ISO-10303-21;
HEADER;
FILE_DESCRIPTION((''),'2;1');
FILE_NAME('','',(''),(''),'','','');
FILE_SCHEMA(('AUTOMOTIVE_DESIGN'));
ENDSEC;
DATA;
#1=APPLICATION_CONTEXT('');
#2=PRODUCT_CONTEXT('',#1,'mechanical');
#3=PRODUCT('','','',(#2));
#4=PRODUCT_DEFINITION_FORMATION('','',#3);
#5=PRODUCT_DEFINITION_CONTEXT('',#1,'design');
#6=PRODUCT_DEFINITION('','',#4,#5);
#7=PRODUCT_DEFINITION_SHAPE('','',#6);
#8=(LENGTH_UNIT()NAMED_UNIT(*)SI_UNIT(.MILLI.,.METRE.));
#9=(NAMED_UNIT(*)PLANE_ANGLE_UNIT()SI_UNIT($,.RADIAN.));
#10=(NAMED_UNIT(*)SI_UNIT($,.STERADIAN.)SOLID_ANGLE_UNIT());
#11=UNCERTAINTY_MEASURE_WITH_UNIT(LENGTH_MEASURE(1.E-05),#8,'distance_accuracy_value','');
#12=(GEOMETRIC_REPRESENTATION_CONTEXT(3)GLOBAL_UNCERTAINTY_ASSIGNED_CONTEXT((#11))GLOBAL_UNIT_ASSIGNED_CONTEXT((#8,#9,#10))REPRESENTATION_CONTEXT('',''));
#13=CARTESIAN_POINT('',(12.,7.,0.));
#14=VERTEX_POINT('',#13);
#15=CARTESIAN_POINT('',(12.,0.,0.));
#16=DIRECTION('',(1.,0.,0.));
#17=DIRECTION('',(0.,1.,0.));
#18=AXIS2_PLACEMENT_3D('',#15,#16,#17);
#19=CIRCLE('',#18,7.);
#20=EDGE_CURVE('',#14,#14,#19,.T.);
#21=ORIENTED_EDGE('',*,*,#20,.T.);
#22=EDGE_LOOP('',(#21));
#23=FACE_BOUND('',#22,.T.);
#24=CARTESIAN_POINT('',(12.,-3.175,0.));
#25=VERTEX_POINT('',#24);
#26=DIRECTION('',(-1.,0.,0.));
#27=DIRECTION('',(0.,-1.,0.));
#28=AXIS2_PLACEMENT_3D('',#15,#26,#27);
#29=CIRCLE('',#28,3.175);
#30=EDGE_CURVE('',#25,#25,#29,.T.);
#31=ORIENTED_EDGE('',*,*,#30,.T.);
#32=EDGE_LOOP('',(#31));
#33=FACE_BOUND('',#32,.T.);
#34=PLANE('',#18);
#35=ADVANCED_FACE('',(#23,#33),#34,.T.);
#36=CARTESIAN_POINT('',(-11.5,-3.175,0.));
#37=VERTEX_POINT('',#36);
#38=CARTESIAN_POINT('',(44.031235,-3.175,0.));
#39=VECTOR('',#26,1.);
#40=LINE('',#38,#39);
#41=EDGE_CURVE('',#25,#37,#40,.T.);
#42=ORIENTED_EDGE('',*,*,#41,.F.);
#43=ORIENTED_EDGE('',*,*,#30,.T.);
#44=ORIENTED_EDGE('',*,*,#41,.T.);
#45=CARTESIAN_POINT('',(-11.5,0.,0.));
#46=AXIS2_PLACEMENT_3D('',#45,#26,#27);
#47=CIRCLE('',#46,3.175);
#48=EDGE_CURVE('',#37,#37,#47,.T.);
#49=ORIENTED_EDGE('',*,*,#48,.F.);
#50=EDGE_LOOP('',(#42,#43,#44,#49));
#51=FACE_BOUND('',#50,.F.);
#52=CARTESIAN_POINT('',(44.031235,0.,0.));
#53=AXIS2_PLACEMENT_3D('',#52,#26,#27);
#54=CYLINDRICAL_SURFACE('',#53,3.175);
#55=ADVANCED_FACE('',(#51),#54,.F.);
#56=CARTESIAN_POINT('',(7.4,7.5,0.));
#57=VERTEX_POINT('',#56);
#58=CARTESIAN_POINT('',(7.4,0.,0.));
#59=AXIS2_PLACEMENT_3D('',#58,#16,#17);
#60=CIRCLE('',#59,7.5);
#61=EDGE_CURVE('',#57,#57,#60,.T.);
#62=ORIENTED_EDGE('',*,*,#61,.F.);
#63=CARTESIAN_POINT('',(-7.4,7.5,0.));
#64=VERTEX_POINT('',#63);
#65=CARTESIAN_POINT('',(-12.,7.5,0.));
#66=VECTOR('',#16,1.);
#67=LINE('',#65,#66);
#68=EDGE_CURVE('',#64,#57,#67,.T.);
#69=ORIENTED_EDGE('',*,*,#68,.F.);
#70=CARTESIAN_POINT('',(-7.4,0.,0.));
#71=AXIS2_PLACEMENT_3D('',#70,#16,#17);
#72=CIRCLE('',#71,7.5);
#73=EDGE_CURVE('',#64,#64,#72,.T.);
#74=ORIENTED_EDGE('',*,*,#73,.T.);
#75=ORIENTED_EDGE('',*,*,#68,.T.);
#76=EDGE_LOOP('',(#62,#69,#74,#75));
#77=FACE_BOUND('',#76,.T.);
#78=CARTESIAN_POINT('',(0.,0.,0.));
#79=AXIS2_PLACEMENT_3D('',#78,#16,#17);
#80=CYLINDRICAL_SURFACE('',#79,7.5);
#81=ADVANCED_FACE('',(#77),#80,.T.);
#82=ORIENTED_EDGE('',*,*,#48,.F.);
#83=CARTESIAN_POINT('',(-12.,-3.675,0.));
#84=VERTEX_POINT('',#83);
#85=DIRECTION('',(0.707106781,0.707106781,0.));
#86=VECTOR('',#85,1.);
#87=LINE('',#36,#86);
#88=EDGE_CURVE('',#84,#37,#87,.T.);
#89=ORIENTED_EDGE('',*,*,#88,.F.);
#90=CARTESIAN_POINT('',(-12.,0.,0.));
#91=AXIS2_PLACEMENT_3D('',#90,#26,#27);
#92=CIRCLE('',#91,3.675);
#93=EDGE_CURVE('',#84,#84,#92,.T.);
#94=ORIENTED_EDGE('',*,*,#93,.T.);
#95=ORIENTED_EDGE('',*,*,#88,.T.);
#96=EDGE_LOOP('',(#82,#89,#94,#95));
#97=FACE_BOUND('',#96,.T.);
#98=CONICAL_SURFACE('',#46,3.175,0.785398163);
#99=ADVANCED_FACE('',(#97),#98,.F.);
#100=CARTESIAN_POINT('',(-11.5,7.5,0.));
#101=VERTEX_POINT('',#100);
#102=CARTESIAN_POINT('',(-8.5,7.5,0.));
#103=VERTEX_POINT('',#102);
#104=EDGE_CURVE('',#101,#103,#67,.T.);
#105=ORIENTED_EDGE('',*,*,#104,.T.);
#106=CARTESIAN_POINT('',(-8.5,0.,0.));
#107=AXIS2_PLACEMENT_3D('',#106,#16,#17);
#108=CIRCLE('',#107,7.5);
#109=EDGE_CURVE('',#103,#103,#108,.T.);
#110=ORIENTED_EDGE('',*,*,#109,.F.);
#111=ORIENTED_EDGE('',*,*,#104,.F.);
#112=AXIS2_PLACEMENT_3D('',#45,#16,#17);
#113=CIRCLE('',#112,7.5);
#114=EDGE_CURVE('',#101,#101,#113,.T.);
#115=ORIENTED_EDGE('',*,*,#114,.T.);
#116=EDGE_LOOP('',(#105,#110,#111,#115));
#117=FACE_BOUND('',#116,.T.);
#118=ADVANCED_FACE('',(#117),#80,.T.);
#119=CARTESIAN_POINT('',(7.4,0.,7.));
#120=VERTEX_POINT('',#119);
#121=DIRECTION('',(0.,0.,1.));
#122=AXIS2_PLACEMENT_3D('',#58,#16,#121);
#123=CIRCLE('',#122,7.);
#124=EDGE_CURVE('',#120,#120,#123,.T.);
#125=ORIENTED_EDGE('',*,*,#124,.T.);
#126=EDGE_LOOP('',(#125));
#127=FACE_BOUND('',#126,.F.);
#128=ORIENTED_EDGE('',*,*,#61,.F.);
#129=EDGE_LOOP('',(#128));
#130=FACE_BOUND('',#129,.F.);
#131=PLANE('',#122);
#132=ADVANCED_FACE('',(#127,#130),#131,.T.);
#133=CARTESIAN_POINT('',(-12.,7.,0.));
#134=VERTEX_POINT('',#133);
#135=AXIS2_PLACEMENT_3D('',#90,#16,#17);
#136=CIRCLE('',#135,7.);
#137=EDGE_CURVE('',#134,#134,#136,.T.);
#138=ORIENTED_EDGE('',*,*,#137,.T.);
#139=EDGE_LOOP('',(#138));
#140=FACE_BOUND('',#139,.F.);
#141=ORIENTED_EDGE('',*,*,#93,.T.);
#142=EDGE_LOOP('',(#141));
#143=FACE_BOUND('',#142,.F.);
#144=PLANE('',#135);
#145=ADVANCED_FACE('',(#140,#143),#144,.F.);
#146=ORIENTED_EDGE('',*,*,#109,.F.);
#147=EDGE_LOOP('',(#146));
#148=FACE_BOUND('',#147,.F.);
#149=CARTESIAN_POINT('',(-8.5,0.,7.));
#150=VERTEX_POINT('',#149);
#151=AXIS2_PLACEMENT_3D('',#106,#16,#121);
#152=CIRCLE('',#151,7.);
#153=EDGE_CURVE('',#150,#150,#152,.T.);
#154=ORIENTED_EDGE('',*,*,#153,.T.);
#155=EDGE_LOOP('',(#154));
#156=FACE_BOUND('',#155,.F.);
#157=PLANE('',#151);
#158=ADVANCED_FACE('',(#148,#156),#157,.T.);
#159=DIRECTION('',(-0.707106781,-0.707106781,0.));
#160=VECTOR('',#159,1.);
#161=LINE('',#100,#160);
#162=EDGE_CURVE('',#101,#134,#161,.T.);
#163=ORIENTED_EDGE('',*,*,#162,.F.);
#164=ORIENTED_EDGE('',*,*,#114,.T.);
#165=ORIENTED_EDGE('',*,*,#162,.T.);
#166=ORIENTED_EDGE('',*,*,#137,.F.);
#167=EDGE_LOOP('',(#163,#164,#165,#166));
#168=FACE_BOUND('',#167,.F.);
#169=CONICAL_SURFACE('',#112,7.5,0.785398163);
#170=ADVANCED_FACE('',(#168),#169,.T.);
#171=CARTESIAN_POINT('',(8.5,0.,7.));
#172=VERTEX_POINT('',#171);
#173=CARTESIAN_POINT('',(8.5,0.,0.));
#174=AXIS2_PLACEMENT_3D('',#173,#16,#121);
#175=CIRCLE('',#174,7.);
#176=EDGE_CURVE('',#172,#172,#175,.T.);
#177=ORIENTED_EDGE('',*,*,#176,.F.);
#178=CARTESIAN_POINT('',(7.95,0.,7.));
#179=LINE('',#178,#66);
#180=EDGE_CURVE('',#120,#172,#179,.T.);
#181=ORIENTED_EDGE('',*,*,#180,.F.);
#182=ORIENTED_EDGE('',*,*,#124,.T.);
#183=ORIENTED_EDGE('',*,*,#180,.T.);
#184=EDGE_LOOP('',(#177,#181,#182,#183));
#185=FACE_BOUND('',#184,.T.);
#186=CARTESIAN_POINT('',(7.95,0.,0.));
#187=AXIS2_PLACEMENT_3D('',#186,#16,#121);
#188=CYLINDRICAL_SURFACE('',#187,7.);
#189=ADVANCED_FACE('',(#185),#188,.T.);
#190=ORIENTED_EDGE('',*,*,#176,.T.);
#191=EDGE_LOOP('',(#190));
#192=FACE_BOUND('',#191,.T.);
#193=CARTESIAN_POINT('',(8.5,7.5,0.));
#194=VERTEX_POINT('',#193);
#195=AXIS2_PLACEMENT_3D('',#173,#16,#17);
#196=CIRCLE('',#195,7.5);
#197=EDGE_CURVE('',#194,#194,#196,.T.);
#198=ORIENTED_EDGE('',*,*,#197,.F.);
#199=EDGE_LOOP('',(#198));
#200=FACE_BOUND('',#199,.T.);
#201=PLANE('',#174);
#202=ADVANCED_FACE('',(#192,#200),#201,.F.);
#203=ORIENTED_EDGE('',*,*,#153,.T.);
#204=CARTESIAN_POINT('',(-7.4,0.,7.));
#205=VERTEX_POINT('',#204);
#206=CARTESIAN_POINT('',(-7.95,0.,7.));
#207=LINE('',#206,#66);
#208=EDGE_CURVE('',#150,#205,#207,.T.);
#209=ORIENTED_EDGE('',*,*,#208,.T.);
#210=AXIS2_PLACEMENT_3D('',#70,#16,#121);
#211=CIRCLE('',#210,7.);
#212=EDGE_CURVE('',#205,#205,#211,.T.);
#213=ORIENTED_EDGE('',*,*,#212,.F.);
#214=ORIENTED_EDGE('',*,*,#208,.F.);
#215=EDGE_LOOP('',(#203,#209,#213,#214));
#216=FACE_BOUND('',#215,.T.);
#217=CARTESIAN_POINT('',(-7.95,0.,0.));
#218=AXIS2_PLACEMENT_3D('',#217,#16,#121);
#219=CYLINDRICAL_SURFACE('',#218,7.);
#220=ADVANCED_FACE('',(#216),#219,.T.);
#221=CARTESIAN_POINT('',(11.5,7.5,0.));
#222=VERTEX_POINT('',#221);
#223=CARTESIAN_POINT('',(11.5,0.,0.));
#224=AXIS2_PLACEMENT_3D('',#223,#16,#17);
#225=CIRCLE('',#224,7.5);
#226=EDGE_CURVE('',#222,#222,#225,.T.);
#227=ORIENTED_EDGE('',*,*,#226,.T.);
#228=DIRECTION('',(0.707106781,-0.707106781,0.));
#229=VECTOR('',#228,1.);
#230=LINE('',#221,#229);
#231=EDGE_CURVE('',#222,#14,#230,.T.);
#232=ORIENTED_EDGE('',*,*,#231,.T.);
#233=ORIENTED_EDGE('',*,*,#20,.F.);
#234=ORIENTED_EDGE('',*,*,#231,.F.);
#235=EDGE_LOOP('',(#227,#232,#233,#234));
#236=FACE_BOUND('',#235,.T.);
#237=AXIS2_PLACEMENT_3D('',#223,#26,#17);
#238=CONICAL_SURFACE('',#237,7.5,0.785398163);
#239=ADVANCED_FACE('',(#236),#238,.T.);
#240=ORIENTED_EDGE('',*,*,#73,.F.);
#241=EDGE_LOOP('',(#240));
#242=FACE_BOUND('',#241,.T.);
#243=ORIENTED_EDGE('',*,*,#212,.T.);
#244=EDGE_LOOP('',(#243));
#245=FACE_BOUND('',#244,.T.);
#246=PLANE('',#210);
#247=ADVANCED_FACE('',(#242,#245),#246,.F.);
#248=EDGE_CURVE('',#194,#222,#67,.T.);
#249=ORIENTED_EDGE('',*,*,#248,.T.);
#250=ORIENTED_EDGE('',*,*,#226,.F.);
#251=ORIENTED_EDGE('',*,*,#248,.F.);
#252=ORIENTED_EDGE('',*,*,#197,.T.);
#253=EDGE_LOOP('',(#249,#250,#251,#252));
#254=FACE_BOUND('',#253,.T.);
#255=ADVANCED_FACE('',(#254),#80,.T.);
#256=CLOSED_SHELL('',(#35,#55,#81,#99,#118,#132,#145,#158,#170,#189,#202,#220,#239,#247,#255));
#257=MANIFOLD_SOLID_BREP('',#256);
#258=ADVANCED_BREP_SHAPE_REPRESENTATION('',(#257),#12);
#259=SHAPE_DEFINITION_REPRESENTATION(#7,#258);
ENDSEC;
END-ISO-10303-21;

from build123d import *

# Parameters (mm, degrees)
F0_R     = 7.5
F1_DEPTH = 12
F3_D     = 6.35
F4_SIZE  = 0.5
F5_W     = 1.1
F5_H     = 3.9801998064


with BuildPart() as f1:
    # F0 (on Right) → F1 (new body, symmetric)
    with BuildSketch(Plane.YZ):
        Circle(F0_R)
    extrude(amount=F1_DEPTH, both=True)

    # F3 (through all)
    with Locations(Plane.YZ.offset(12)):
        with Locations((0, 0)):
            Hole(F3_D / 2)

    # F4
    f4_edges = [f1.edges().sort_by_distance(p)[0] for p in [
        (12, -7.5, 0),
        (-12, -7.5, 0),
        (-12, -3.175, 0),
    ]]
    chamfer(f4_edges, length=F4_SIZE)

    # F5 (on Front) → F6 (revolve, cut)
    with BuildSketch(Plane.XZ):
        with Locations((-7.95, 8.9900999032)):
            Rectangle(F5_W, F5_H)
        with Locations((7.95, 8.9900999032)):
            Rectangle(F5_W, F5_H)
    revolve(axis=Axis((-0.5466132425, 0, 0), (1, 0, 0)), mode=Mode.SUBTRACT)


solid = f1.part
